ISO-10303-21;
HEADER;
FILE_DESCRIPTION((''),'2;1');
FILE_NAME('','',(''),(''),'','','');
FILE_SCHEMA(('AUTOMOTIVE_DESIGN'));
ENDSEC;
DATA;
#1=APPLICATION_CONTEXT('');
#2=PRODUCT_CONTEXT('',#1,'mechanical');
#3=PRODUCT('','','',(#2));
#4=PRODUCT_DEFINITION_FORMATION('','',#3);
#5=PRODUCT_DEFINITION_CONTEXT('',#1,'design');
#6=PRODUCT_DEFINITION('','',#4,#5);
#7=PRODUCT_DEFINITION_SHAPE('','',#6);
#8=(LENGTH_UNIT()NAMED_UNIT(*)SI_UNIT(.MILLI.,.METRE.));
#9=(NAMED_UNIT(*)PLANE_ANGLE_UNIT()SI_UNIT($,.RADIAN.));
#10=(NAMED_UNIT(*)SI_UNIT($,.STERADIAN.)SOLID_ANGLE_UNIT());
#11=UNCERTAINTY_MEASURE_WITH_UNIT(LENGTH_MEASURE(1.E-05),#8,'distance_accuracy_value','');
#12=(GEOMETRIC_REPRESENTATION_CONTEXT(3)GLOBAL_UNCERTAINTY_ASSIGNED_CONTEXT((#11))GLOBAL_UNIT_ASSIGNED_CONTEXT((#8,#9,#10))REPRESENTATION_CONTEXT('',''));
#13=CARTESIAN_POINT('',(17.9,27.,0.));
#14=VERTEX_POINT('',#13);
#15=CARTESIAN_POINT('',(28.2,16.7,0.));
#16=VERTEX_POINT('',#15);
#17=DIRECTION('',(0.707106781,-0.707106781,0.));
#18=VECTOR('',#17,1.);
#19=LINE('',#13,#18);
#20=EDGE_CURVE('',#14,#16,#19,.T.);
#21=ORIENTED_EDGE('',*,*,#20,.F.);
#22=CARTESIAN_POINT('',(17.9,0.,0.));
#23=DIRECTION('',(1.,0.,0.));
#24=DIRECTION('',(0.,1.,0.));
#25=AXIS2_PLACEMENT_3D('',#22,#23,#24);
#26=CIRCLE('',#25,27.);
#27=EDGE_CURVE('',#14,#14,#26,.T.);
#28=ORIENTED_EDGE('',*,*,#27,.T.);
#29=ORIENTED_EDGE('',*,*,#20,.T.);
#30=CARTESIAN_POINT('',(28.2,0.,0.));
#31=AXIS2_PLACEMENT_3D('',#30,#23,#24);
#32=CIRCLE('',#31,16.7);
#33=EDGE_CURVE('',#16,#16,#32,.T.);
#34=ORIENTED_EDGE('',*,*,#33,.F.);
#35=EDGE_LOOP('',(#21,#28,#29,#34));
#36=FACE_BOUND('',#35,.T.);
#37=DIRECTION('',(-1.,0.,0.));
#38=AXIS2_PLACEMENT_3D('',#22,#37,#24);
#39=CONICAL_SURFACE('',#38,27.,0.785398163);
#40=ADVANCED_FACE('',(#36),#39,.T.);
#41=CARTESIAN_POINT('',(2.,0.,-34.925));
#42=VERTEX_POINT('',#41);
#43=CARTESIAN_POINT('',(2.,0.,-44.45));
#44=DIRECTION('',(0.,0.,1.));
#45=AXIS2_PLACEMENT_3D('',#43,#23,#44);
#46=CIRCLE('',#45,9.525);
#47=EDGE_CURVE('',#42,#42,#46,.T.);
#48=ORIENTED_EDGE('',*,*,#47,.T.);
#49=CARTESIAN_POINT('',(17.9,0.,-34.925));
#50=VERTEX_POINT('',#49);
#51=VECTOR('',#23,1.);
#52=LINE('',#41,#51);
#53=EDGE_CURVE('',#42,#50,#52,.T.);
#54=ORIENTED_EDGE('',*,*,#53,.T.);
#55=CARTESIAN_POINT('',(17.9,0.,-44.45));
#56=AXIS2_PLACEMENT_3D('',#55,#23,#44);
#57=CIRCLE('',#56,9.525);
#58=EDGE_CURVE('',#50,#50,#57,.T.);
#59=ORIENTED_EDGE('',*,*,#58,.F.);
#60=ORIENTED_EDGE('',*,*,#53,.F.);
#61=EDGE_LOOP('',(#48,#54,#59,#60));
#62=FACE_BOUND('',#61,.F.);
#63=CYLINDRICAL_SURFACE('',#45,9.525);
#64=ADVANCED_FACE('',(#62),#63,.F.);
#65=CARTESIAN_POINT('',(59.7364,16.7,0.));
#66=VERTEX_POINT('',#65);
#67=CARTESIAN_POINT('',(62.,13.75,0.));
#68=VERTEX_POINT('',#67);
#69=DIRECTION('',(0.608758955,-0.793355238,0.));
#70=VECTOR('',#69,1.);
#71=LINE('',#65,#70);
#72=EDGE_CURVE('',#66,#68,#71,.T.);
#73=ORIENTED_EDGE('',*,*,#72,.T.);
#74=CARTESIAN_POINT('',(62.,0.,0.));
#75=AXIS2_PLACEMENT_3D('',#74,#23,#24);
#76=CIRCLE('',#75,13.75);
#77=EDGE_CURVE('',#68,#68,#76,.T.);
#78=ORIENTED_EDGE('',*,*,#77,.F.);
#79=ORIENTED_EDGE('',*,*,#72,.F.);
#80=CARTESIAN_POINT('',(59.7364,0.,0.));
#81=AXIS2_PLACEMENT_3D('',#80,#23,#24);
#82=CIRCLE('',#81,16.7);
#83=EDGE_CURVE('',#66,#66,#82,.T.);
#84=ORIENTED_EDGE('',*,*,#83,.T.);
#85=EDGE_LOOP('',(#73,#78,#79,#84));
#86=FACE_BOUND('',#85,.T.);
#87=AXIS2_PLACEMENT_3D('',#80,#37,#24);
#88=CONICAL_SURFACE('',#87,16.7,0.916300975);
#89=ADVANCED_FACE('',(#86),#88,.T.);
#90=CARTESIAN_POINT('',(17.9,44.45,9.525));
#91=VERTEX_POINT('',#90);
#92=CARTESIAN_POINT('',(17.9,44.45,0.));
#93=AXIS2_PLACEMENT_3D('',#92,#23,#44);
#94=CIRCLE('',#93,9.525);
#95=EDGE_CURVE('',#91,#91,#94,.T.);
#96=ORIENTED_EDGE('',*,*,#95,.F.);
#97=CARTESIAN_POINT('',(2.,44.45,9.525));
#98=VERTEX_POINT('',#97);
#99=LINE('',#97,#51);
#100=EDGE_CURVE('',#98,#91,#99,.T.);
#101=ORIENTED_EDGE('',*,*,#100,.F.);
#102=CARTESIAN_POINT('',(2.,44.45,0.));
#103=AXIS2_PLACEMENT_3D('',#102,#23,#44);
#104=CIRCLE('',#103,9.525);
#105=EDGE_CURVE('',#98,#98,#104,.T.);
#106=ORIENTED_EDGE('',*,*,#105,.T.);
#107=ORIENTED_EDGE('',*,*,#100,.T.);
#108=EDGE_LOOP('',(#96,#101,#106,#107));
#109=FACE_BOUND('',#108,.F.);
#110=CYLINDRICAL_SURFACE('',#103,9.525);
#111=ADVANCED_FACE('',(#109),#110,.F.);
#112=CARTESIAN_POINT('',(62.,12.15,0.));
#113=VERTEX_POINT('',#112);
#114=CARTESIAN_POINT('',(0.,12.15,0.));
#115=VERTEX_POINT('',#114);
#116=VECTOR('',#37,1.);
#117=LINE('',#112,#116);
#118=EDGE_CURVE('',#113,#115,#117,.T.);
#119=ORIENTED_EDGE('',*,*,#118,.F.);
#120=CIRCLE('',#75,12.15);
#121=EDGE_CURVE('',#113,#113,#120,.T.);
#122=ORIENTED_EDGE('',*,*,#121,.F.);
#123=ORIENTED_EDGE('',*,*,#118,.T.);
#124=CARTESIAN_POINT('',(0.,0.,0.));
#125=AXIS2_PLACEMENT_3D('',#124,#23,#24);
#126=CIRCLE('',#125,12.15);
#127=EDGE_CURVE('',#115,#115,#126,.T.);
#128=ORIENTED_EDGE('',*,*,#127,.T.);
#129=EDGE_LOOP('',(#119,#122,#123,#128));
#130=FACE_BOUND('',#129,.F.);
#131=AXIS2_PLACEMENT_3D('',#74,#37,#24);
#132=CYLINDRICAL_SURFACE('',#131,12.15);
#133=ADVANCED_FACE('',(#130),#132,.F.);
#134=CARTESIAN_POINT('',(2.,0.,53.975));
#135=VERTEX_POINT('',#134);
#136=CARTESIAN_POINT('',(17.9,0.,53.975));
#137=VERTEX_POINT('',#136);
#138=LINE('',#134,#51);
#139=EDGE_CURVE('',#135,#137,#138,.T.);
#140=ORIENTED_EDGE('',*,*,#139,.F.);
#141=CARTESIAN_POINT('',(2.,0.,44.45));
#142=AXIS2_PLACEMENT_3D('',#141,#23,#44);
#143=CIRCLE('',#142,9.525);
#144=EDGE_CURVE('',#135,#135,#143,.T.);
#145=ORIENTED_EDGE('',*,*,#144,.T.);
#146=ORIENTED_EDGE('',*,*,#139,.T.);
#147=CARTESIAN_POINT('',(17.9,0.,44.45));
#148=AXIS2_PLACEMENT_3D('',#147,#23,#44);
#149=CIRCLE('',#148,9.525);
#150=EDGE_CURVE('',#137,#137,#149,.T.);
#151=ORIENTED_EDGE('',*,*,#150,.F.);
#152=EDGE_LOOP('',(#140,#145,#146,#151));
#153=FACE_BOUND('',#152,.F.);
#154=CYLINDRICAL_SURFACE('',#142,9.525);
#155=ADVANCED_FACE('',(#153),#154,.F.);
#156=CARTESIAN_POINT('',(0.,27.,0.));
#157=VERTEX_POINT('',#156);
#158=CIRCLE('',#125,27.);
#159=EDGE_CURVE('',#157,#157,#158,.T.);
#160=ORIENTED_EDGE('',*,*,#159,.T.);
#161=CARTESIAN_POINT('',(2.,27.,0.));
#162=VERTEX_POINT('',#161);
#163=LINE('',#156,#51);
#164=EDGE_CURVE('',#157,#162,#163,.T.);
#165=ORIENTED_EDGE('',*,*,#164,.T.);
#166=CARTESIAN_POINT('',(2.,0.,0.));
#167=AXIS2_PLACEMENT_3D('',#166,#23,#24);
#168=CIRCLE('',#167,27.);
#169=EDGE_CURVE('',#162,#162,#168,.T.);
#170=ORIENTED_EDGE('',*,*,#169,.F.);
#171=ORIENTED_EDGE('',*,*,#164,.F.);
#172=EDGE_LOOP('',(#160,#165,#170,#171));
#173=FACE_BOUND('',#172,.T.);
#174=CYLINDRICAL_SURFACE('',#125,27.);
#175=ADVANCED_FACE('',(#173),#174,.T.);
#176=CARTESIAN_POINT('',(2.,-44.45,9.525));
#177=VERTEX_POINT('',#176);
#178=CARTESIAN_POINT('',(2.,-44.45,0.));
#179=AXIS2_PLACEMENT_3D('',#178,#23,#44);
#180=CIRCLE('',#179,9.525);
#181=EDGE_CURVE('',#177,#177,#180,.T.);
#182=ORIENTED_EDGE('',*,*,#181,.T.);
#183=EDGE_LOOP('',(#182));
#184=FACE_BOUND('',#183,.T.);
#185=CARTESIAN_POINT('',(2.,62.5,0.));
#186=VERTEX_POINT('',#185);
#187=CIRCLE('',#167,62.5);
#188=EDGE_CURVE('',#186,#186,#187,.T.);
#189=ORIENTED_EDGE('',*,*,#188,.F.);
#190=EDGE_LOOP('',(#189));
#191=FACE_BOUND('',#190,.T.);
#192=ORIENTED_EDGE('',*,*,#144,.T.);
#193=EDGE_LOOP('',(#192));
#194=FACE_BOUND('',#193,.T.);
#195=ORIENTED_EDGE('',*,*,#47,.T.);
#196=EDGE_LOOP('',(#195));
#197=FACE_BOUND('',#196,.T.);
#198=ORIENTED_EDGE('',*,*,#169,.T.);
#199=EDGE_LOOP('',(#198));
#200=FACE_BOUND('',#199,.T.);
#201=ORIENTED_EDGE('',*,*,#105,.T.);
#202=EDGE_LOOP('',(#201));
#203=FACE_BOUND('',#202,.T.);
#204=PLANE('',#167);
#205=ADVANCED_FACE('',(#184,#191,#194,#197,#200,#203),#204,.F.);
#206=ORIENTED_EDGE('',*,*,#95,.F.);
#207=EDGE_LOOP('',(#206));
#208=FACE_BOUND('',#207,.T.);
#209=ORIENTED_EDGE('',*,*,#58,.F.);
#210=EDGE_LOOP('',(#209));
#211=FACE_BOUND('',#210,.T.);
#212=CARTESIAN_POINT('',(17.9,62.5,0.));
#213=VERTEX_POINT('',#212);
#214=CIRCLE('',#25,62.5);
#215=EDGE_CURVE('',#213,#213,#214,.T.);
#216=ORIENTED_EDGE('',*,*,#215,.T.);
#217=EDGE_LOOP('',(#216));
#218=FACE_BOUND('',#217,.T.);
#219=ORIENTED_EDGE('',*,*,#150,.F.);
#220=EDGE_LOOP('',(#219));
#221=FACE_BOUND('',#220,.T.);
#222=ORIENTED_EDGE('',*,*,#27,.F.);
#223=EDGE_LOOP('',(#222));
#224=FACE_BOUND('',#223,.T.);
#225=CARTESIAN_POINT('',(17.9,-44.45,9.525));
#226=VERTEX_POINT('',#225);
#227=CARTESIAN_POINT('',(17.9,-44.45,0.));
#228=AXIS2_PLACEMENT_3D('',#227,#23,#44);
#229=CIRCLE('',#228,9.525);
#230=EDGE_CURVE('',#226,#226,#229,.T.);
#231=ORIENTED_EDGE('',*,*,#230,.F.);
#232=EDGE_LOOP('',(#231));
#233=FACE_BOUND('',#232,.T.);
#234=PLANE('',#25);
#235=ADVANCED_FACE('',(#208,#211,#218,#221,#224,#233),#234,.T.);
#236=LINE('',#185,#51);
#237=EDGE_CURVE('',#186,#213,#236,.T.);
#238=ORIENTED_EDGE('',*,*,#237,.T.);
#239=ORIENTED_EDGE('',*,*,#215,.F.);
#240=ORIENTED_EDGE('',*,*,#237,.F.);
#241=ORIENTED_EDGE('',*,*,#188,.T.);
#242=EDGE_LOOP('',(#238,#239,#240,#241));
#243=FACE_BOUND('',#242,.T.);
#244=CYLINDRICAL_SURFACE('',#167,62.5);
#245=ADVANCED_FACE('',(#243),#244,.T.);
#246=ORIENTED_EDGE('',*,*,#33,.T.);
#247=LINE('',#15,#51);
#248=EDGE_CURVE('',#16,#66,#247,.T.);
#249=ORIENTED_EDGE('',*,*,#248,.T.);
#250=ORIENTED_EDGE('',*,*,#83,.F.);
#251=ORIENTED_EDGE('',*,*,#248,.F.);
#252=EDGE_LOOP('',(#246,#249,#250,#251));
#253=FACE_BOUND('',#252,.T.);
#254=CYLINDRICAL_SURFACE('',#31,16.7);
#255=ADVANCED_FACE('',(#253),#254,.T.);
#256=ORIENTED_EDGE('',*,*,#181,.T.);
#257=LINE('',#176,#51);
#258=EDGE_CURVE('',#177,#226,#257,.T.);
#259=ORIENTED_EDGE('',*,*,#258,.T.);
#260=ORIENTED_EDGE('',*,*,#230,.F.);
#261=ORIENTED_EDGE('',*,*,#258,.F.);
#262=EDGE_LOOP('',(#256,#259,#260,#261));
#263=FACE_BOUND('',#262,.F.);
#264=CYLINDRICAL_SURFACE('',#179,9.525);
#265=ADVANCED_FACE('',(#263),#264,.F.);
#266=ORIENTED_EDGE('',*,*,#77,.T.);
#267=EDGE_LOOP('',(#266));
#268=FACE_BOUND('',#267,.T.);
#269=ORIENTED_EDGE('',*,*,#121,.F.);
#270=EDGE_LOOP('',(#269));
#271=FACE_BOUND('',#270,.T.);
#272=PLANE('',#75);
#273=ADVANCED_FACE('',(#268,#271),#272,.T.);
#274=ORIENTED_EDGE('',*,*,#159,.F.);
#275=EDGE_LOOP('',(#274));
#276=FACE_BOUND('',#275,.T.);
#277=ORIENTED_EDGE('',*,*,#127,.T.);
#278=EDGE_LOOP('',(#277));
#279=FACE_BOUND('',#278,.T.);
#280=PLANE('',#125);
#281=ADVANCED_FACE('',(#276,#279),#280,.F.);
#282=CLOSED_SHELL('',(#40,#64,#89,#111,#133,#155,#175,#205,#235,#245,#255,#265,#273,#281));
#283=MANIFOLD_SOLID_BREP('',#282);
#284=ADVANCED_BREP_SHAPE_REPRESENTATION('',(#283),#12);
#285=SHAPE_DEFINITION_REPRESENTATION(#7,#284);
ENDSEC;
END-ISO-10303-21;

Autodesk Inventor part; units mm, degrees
ref_plane "YZ Plane" through (0, 0, 0) normal (1, 0, 0) x (0, 1, 0)
ref_plane "XZ Plane" through (0, 0, 0) normal (0, 1, 0) x (-1, 0, 0)
ref_plane "XY Plane" through (0, 0, 0) normal (0, 0, 1) x (1, 0, 0)
sketch "Sketch1" plane through (0, 0, 0) normal (0, 0, 1) x (1, 0, 0)
  line L0 (0, 0) -> (93, 0)
  line L1 (0, 12.15) -> (0, 27)
  line L2 (0, 27) -> (2, 27)
  line L3 (2, 27) -> (2, 62.5)
  line L4 (2, 62.5) -> (17.9, 62.5)
  line L5 (17.9, 62.5) -> (17.9, 27)
  line L6 (17.9, 27) -> (28.2, 16.7)
  line L7 (28.2, 16.7) -> (59.7364, 16.7)
  line L8 (59.7364, 16.7) -> (62, 13.75)
  line L9 (62, 13.75) -> (62, 12.15)
  line L10 (62, 12.15) -> (0, 12.15)
  point P0 (0, 19.575)
  dimension "d5" = 125
  dimension "d6" = 54
  dimension "d7" = 2
  dimension "d8" = 15.9
  dimension "d9" = 45
  dimension "d10" = 60
  dimension "d27" = 37.5
  dimension "d28" = 24.3
  dimension "d29" = 33.4
  dimension "d30" = 1.6
revolve "Revolution1" add sketch "Sketch1" angle 360 about axis through (0, 0, 0) along (1, 0, 0)
sketch "Sketch3" plane through (2, 0, 0) normal (-1, 0, 0) x (0, 0, 1)
  point P0 (0, 0)
  point P1 (0, 44.45)
  dimension "d16" = 44.45
hole "Hole1" at (2, 44.45, 0) direction (1, 0, 0) diameter 19.05 end up to surface
pattern_circular "Circular Pattern1" count 4 over 360 about axis through (9.95, 0, 0) along (1, 0, 0) of "Hole1"
properties part number "Flange 1 in" material "ASTM A105 Gr.B"
